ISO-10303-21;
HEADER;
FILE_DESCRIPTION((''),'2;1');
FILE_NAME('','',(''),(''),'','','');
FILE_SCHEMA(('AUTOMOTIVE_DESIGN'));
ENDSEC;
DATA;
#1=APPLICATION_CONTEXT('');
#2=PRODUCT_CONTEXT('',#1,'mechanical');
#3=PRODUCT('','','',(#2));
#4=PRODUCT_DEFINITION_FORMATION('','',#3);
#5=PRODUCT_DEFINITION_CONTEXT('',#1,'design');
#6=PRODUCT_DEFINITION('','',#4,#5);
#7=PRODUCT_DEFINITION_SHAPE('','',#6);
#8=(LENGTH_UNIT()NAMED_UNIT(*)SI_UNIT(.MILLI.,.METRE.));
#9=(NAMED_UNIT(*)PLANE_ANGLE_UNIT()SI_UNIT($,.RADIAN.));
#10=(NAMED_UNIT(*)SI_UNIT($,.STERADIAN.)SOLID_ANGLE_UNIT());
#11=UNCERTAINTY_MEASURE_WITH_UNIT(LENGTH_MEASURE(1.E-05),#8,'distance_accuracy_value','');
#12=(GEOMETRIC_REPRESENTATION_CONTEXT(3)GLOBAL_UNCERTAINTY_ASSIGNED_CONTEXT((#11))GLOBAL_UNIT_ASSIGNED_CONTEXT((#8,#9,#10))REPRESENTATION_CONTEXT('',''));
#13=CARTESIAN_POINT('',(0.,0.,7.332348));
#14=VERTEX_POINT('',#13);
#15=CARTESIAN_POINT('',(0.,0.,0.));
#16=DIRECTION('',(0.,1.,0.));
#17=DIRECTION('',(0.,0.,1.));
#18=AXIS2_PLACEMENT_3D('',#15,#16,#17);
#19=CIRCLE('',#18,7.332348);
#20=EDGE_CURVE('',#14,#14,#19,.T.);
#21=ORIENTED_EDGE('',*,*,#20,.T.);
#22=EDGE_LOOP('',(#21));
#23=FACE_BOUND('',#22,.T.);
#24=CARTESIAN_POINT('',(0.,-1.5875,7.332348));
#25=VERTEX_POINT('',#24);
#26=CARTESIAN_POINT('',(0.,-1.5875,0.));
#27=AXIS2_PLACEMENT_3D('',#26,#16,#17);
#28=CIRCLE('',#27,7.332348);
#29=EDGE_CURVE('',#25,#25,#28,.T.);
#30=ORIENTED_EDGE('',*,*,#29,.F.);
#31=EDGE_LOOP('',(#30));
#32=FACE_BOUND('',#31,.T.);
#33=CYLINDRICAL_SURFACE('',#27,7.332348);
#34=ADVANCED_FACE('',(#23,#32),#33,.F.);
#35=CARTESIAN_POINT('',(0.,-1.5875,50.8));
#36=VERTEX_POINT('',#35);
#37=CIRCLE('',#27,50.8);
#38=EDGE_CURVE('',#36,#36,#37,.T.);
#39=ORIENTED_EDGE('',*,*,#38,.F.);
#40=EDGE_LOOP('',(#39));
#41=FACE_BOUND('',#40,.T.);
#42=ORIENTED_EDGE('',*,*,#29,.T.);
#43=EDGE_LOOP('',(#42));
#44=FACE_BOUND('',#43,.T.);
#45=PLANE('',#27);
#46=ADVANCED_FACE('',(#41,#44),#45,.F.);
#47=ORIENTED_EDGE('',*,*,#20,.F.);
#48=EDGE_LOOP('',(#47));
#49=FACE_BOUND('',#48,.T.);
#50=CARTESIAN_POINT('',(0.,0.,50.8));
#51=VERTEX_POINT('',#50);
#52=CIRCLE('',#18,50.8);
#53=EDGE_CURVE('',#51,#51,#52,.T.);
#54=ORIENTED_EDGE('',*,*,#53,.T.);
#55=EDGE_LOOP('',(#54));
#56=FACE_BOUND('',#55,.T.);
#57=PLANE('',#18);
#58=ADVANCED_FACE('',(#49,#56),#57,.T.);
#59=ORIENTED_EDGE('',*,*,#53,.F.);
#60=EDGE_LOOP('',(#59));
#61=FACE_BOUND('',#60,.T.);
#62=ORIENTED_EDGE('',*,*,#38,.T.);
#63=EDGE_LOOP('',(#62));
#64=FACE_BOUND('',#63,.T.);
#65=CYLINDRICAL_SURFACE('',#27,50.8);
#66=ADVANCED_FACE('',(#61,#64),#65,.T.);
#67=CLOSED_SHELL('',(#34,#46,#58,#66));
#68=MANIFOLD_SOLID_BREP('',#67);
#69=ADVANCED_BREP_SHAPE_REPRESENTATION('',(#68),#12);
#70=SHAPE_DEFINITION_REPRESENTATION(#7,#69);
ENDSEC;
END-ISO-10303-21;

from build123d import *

# Parameters (mm, degrees)
SKETCH1_R          = 50.8
SKETCH1_R_2        = 7.332348419
BASE_FLANGE1_DEPTH = 1.5875


# Sheet-metal steps are written as plain solids
with BuildPart() as part:
    # Sketch1 → Base-Flange1 (new body)
    with BuildSketch(Plane(origin=(0, 0, 0), x_dir=(1, 0, 0), z_dir=(0, 1, 0))):
        with Locations(Location((0, 0, 0), (0, 0, 270))):
            Circle(SKETCH1_R)
        with Locations(Location((0, 0, 0), (0, 0, 270))):
            Circle(SKETCH1_R_2, mode=Mode.SUBTRACT)
    extrude(amount=-BASE_FLANGE1_DEPTH)


solid = part.part
